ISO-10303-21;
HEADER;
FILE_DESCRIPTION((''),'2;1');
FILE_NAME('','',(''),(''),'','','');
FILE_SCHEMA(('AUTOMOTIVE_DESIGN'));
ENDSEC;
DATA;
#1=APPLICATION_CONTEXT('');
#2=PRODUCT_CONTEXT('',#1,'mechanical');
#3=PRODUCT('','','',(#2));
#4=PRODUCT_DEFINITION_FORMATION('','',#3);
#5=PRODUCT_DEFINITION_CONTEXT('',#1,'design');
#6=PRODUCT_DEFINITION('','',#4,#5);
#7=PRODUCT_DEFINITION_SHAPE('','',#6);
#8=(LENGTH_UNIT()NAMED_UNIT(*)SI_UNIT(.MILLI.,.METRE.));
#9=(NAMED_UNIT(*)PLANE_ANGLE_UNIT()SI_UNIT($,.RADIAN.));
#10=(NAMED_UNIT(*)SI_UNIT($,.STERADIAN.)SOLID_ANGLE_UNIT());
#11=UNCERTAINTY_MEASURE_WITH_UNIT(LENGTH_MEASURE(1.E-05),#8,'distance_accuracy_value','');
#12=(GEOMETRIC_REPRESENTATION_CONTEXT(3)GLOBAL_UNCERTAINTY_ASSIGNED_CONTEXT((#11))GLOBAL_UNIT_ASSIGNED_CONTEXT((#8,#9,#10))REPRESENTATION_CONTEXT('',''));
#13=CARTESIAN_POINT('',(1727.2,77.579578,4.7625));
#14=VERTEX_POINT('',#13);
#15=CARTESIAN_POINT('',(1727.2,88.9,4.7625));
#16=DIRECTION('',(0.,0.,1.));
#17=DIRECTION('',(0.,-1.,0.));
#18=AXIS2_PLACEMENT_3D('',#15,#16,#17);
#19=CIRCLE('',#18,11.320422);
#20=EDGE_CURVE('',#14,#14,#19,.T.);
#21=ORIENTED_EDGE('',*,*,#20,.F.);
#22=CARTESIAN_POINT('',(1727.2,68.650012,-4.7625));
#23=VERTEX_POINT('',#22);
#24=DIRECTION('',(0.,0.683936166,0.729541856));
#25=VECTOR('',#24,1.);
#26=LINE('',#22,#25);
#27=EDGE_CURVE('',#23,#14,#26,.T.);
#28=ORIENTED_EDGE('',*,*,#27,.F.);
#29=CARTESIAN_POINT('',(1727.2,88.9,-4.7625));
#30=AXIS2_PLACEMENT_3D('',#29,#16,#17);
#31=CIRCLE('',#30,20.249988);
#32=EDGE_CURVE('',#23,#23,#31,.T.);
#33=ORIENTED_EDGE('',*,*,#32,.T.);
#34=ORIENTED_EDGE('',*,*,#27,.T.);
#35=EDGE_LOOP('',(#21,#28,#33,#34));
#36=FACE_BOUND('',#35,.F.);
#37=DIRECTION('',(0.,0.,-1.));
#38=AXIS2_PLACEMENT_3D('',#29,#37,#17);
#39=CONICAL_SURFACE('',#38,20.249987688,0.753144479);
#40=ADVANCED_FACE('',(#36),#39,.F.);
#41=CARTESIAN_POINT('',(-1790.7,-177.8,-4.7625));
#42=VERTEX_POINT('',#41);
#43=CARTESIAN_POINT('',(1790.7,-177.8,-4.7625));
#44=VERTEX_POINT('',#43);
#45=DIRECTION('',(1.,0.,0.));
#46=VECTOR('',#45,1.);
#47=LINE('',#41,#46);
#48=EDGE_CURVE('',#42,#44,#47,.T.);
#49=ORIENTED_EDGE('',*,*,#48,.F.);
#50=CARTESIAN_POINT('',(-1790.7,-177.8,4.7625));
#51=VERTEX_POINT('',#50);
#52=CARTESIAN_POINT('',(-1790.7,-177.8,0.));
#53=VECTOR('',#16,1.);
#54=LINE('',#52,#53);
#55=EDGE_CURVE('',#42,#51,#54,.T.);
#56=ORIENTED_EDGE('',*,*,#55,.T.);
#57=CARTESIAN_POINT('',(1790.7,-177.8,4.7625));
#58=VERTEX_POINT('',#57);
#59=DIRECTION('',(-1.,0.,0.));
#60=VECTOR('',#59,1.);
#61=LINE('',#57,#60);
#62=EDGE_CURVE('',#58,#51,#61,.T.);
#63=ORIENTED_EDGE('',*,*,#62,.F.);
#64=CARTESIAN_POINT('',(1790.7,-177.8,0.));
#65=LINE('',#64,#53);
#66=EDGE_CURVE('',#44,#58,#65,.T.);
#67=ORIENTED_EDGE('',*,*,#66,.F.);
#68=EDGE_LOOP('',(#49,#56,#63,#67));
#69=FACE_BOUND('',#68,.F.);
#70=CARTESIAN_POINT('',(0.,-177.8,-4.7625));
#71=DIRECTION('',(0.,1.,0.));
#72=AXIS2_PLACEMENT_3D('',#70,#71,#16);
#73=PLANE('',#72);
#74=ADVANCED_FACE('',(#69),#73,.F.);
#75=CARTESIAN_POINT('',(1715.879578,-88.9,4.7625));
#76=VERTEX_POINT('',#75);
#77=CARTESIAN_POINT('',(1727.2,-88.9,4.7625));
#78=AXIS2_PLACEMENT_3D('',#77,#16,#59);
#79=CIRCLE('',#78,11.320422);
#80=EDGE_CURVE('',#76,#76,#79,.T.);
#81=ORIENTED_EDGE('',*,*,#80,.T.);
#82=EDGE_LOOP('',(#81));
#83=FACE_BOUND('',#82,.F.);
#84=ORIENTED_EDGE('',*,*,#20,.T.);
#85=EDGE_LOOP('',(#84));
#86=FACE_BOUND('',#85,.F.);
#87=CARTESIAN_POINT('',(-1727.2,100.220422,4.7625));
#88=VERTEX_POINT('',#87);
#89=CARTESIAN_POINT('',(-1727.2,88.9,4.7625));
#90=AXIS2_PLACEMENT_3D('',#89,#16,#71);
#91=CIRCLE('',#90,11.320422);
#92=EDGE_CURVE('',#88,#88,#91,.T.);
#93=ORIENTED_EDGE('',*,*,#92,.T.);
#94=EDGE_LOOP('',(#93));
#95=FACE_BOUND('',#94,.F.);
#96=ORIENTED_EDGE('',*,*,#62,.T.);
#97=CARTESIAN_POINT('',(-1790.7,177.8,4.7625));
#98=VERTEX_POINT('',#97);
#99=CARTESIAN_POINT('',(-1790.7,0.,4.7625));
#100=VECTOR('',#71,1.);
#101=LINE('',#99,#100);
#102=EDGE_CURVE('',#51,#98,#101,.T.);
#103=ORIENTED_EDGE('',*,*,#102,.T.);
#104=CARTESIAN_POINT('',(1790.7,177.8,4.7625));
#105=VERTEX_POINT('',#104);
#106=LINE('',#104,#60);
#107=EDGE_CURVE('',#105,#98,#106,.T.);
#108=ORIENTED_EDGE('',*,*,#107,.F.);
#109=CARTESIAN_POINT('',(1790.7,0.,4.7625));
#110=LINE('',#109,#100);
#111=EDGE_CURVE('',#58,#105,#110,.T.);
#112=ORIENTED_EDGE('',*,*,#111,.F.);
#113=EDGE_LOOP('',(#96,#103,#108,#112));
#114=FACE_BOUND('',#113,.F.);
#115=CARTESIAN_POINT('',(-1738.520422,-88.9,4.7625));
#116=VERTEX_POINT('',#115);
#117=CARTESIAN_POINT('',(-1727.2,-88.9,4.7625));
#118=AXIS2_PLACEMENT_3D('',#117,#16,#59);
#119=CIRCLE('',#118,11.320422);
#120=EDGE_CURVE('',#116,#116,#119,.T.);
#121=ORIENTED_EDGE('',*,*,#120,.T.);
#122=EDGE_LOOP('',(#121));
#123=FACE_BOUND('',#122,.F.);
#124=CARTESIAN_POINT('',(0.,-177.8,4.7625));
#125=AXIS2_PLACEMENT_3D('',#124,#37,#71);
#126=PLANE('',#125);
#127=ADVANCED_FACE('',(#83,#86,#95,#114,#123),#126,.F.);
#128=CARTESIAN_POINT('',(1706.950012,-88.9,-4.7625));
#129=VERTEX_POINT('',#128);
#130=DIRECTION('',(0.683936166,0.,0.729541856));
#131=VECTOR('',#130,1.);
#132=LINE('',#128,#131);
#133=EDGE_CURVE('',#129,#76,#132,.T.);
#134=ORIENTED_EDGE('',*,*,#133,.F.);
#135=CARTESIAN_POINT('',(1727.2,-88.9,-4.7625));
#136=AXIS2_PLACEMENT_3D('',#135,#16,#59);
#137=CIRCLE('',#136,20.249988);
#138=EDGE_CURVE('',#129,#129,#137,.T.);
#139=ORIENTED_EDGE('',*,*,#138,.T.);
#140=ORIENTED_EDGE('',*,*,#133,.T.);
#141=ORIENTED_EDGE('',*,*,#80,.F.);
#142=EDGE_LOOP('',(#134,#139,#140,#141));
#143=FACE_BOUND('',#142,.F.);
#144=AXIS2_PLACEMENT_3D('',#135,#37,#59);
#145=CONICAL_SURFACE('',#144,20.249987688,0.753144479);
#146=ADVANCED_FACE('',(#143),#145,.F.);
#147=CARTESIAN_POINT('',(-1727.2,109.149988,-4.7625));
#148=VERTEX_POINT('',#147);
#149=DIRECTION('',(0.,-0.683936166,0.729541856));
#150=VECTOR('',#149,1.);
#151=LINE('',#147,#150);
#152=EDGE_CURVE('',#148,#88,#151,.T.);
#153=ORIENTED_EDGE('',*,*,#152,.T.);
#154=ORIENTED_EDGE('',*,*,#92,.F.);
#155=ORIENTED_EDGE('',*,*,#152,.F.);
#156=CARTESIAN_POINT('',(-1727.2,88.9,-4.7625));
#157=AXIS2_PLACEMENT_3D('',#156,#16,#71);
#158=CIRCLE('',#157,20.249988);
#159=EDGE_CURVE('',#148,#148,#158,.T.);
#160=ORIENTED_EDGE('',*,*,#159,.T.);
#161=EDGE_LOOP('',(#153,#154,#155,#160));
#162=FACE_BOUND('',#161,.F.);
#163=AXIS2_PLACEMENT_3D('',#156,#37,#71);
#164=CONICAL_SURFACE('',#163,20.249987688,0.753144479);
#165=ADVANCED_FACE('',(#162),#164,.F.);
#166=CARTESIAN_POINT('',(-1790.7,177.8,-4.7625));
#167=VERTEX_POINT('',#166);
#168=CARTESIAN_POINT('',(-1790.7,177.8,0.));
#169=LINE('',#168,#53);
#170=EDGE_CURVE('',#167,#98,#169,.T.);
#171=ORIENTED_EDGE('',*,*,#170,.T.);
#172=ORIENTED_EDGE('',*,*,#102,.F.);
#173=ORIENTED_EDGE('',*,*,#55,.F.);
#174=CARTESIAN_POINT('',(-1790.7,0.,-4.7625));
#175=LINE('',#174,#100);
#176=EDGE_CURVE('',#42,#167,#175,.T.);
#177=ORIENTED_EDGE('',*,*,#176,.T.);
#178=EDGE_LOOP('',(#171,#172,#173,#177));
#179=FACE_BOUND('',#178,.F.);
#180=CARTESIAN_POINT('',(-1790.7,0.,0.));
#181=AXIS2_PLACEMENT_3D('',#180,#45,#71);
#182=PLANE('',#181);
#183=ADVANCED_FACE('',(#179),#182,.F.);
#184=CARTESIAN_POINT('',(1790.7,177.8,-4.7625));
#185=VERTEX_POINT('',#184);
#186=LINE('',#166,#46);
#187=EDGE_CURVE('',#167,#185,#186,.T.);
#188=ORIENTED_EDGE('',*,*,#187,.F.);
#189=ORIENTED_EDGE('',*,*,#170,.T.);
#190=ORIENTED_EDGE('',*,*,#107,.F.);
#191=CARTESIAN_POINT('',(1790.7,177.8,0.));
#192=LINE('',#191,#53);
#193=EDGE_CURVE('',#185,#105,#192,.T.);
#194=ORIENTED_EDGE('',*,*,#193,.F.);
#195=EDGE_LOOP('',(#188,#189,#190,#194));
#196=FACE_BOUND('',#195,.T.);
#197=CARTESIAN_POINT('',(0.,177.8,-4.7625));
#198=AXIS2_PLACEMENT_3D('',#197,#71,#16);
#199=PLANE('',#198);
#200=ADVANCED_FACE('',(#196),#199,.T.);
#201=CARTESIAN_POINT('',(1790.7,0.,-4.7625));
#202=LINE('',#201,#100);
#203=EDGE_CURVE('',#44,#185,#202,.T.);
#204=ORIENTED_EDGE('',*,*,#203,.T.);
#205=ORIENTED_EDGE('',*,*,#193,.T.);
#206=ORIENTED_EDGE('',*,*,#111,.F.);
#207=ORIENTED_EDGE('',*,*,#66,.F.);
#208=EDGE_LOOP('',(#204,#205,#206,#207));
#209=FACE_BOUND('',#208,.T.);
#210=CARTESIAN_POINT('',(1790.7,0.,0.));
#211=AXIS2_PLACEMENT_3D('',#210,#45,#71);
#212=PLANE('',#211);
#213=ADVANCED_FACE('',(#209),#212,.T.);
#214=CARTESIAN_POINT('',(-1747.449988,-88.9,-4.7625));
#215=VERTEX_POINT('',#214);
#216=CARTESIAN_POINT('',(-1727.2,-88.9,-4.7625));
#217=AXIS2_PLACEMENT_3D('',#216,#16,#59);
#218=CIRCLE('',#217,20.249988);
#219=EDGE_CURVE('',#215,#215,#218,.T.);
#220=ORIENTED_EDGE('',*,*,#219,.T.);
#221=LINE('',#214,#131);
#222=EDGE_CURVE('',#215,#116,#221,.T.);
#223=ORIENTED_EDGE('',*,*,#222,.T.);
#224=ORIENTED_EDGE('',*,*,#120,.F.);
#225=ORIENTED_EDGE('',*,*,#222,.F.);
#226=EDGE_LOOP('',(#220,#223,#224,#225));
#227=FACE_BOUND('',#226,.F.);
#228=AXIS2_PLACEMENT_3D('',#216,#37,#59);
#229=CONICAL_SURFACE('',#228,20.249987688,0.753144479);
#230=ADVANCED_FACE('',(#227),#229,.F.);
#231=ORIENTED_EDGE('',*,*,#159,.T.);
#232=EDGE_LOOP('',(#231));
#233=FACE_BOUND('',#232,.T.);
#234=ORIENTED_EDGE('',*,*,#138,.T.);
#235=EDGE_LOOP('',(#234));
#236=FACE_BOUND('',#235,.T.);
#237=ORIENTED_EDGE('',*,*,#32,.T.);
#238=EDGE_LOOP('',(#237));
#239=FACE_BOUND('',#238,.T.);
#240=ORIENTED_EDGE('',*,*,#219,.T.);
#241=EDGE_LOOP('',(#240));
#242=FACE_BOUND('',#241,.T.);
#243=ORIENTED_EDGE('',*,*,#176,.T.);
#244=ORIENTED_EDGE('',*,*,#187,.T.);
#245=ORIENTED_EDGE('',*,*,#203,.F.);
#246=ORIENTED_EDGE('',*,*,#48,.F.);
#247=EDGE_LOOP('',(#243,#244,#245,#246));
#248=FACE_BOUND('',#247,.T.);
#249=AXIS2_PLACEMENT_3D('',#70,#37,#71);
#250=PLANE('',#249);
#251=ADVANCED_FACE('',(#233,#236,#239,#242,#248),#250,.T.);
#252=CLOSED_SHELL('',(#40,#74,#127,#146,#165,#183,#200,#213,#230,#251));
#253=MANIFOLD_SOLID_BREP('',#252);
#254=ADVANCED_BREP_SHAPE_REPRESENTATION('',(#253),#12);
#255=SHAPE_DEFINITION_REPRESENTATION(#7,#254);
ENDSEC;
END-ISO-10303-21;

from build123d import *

# Parameters (mm, degrees)
F0_W     = 355.6
F0_H     = 9.525
F1_DEPTH = 1790.7
F3_DEPTH = 25.4


# Not quite as in the source:
# - a fillet or chamfer that OpenCascade refuses, or shapes differently, is made with other operations: its cross-section is extruded or revolved along the edge and cut away or added


with BuildPart() as f1:
    # F0 (on Right) → F1 (new body, symmetric)
    with BuildSketch(Plane.YZ):
        Rectangle(F0_W, F0_H)
    extrude(amount=F1_DEPTH, both=True)

    # F2 (on face) → F3 (cut)
    with BuildSketch(Plane.XY.offset(4.7625)):
        with BuildLine():
            Line((-1727.2, 88.9), (-1735.5439, 88.9))
            ThreePointArc((-1735.5439, 88.9), (-1733.1000282715, 82.9999717285), (-1727.2, 80.5561))
            Line((-1727.2, 80.5561), (-1727.2, 88.9))
        make_face()
        with BuildLine():
            Line((-1718.8561, 88.9), (-1727.2, 88.9))
            Line((-1727.2, 88.9), (-1727.2, 80.5561))
            ThreePointArc((-1727.2, 80.5561), (-1721.2999717285, 82.9999717285), (-1718.8561, 88.9))
        make_face()
        with BuildLine():
            ThreePointArc((-1718.8561, 88.9), (-1721.2999717285, 94.8000282715), (-1727.2, 97.2439))
            Line((-1727.2, 97.2439), (-1727.2, 88.9))
            Line((-1727.2, 88.9), (-1718.8561, 88.9))
        make_face()
        with BuildLine():
            ThreePointArc((-1727.2, 97.2439), (-1733.1000282715, 94.8000282715), (-1735.5439, 88.9))
            Line((-1735.5439, 88.9), (-1727.2, 88.9))
            Line((-1727.2, 88.9), (-1727.2, 97.2439))
        make_face()
        with BuildLine():
            ThreePointArc((1735.5439, -88.9), (1733.1000282715, -82.9999717285), (1727.2, -80.5561))
            Line((1727.2, -80.5561), (1727.2, -88.9))
            Line((1727.2, -88.9), (1735.5439, -88.9))
        make_face()
        with BuildLine():
            ThreePointArc((1727.2, -80.5561), (1721.2999717285, -82.9999717285), (1718.8561, -88.9))
            Line((1718.8561, -88.9), (1727.2, -88.9))
            Line((1727.2, -88.9), (1727.2, -80.5561))
        make_face()
        with BuildLine():
            Line((1735.5439, -88.9), (1727.2, -88.9))
            Line((1727.2, -88.9), (1727.2, -97.2439))
            ThreePointArc((1727.2, -97.2439), (1733.1000282715, -94.8000282715), (1735.5439, -88.9))
        make_face()
        with BuildLine():
            Line((1727.2, -88.9), (1718.8561, -88.9))
            ThreePointArc((1718.8561, -88.9), (1721.2999717285, -94.8000282715), (1727.2, -97.2439))
            Line((1727.2, -97.2439), (1727.2, -88.9))
        make_face()
        with BuildLine():
            Line((1727.2, 88.9), (1718.8561, 88.9))
            ThreePointArc((1718.8561, 88.9), (1721.2999717285, 82.9999717285), (1727.2, 80.5561))
            Line((1727.2, 80.5561), (1727.2, 88.9))
        make_face()
        with BuildLine():
            Line((1727.2, 88.9), (1727.2, 97.2439))
            ThreePointArc((1727.2, 97.2439), (1721.2999717285, 94.8000282715), (1718.8561, 88.9))
            Line((1718.8561, 88.9), (1727.2, 88.9))
        make_face()
        with BuildLine():
            ThreePointArc((1735.5439, 88.9), (1733.1000282715, 94.8000282715), (1727.2, 97.2439))
            Line((1727.2, 97.2439), (1727.2, 88.9))
            Line((1727.2, 88.9), (1735.5439, 88.9))
        make_face()
        with BuildLine():
            Line((1735.5439, 88.9), (1727.2, 88.9))
            Line((1727.2, 88.9), (1727.2, 80.5561))
            ThreePointArc((1727.2, 80.5561), (1733.1000282715, 82.9999717285), (1735.5439, 88.9))
        make_face()
        with BuildLine():
            ThreePointArc((-1727.2, -80.5561), (-1733.1000282715, -82.9999717285), (-1735.5439, -88.9))
            Line((-1735.5439, -88.9), (-1727.2, -88.9))
            Line((-1727.2, -88.9), (-1727.2, -80.5561))
        make_face()
        with BuildLine():
            Line((-1727.2, -80.5561), (-1727.2, -88.9))
            Line((-1727.2, -88.9), (-1718.8561, -88.9))
            ThreePointArc((-1718.8561, -88.9), (-1721.2999717285, -82.9999717285), (-1727.2, -80.5561))
        make_face()
        with BuildLine():
            Line((-1718.8561, -88.9), (-1727.2, -88.9))
            Line((-1727.2, -88.9), (-1727.2, -97.2439))
            ThreePointArc((-1727.2, -97.2439), (-1721.2999717285, -94.8000282715), (-1718.8561, -88.9))
        make_face()
        with BuildLine():
            Line((-1727.2, -88.9), (-1735.5439, -88.9))
            ThreePointArc((-1735.5439, -88.9), (-1733.1000282715, -94.8000282715), (-1727.2, -97.2439))
            Line((-1727.2, -97.2439), (-1727.2, -88.9))
        make_face()
    extrude(amount=-F3_DEPTH, mode=Mode.SUBTRACT)

    # F4: chamfer of 12.7 x 11.9060876876 on 4 edges, made by hand

    # F4_s1 → F4_t2 (revolve, cut)
    with BuildSketch(Plane.XZ.offset(88.9)):
        Polygon((-1747.4499876876, -4.7625), (-1735.5439, 7.9375), (-1735.5439, -4.7625), align=None)
    revolve(axis=Axis((-1727.2, -88.9, -4.7625), (0, 0, 1)), mode=Mode.SUBTRACT)

    # F4_s3 → F4_t4 (revolve, cut)
    with BuildSketch(Plane.YZ.offset(-1727.2)):
        Polygon((109.1499876876, -4.7625), (97.2439, 7.9375), (97.2439, -4.7625), align=None)
    revolve(axis=Axis((-1727.2, 88.9, -4.7625), (0, 0, 1)), mode=Mode.SUBTRACT)

    # F4_s5 → F4_t6 (revolve, cut)
    with BuildSketch(Plane.YZ.offset(1727.2)):
        Polygon((68.6500123124, -4.7625), (80.5561, 7.9375), (80.5561, -4.7625), align=None)
    revolve(axis=Axis((1727.2, 88.9, -4.7625), (0, 0, 1)), mode=Mode.SUBTRACT)

    # F4_s7 → F4_t8 (revolve, cut)
    with BuildSketch(Plane.XZ.offset(88.9)):
        Polygon((1706.9500123124, -4.7625), (1718.8561, 7.9375), (1718.8561, -4.7625), align=None)
    revolve(axis=Axis((1727.2, -88.9, -4.7625), (0, 0, 1)), mode=Mode.SUBTRACT)


solid = f1.part
